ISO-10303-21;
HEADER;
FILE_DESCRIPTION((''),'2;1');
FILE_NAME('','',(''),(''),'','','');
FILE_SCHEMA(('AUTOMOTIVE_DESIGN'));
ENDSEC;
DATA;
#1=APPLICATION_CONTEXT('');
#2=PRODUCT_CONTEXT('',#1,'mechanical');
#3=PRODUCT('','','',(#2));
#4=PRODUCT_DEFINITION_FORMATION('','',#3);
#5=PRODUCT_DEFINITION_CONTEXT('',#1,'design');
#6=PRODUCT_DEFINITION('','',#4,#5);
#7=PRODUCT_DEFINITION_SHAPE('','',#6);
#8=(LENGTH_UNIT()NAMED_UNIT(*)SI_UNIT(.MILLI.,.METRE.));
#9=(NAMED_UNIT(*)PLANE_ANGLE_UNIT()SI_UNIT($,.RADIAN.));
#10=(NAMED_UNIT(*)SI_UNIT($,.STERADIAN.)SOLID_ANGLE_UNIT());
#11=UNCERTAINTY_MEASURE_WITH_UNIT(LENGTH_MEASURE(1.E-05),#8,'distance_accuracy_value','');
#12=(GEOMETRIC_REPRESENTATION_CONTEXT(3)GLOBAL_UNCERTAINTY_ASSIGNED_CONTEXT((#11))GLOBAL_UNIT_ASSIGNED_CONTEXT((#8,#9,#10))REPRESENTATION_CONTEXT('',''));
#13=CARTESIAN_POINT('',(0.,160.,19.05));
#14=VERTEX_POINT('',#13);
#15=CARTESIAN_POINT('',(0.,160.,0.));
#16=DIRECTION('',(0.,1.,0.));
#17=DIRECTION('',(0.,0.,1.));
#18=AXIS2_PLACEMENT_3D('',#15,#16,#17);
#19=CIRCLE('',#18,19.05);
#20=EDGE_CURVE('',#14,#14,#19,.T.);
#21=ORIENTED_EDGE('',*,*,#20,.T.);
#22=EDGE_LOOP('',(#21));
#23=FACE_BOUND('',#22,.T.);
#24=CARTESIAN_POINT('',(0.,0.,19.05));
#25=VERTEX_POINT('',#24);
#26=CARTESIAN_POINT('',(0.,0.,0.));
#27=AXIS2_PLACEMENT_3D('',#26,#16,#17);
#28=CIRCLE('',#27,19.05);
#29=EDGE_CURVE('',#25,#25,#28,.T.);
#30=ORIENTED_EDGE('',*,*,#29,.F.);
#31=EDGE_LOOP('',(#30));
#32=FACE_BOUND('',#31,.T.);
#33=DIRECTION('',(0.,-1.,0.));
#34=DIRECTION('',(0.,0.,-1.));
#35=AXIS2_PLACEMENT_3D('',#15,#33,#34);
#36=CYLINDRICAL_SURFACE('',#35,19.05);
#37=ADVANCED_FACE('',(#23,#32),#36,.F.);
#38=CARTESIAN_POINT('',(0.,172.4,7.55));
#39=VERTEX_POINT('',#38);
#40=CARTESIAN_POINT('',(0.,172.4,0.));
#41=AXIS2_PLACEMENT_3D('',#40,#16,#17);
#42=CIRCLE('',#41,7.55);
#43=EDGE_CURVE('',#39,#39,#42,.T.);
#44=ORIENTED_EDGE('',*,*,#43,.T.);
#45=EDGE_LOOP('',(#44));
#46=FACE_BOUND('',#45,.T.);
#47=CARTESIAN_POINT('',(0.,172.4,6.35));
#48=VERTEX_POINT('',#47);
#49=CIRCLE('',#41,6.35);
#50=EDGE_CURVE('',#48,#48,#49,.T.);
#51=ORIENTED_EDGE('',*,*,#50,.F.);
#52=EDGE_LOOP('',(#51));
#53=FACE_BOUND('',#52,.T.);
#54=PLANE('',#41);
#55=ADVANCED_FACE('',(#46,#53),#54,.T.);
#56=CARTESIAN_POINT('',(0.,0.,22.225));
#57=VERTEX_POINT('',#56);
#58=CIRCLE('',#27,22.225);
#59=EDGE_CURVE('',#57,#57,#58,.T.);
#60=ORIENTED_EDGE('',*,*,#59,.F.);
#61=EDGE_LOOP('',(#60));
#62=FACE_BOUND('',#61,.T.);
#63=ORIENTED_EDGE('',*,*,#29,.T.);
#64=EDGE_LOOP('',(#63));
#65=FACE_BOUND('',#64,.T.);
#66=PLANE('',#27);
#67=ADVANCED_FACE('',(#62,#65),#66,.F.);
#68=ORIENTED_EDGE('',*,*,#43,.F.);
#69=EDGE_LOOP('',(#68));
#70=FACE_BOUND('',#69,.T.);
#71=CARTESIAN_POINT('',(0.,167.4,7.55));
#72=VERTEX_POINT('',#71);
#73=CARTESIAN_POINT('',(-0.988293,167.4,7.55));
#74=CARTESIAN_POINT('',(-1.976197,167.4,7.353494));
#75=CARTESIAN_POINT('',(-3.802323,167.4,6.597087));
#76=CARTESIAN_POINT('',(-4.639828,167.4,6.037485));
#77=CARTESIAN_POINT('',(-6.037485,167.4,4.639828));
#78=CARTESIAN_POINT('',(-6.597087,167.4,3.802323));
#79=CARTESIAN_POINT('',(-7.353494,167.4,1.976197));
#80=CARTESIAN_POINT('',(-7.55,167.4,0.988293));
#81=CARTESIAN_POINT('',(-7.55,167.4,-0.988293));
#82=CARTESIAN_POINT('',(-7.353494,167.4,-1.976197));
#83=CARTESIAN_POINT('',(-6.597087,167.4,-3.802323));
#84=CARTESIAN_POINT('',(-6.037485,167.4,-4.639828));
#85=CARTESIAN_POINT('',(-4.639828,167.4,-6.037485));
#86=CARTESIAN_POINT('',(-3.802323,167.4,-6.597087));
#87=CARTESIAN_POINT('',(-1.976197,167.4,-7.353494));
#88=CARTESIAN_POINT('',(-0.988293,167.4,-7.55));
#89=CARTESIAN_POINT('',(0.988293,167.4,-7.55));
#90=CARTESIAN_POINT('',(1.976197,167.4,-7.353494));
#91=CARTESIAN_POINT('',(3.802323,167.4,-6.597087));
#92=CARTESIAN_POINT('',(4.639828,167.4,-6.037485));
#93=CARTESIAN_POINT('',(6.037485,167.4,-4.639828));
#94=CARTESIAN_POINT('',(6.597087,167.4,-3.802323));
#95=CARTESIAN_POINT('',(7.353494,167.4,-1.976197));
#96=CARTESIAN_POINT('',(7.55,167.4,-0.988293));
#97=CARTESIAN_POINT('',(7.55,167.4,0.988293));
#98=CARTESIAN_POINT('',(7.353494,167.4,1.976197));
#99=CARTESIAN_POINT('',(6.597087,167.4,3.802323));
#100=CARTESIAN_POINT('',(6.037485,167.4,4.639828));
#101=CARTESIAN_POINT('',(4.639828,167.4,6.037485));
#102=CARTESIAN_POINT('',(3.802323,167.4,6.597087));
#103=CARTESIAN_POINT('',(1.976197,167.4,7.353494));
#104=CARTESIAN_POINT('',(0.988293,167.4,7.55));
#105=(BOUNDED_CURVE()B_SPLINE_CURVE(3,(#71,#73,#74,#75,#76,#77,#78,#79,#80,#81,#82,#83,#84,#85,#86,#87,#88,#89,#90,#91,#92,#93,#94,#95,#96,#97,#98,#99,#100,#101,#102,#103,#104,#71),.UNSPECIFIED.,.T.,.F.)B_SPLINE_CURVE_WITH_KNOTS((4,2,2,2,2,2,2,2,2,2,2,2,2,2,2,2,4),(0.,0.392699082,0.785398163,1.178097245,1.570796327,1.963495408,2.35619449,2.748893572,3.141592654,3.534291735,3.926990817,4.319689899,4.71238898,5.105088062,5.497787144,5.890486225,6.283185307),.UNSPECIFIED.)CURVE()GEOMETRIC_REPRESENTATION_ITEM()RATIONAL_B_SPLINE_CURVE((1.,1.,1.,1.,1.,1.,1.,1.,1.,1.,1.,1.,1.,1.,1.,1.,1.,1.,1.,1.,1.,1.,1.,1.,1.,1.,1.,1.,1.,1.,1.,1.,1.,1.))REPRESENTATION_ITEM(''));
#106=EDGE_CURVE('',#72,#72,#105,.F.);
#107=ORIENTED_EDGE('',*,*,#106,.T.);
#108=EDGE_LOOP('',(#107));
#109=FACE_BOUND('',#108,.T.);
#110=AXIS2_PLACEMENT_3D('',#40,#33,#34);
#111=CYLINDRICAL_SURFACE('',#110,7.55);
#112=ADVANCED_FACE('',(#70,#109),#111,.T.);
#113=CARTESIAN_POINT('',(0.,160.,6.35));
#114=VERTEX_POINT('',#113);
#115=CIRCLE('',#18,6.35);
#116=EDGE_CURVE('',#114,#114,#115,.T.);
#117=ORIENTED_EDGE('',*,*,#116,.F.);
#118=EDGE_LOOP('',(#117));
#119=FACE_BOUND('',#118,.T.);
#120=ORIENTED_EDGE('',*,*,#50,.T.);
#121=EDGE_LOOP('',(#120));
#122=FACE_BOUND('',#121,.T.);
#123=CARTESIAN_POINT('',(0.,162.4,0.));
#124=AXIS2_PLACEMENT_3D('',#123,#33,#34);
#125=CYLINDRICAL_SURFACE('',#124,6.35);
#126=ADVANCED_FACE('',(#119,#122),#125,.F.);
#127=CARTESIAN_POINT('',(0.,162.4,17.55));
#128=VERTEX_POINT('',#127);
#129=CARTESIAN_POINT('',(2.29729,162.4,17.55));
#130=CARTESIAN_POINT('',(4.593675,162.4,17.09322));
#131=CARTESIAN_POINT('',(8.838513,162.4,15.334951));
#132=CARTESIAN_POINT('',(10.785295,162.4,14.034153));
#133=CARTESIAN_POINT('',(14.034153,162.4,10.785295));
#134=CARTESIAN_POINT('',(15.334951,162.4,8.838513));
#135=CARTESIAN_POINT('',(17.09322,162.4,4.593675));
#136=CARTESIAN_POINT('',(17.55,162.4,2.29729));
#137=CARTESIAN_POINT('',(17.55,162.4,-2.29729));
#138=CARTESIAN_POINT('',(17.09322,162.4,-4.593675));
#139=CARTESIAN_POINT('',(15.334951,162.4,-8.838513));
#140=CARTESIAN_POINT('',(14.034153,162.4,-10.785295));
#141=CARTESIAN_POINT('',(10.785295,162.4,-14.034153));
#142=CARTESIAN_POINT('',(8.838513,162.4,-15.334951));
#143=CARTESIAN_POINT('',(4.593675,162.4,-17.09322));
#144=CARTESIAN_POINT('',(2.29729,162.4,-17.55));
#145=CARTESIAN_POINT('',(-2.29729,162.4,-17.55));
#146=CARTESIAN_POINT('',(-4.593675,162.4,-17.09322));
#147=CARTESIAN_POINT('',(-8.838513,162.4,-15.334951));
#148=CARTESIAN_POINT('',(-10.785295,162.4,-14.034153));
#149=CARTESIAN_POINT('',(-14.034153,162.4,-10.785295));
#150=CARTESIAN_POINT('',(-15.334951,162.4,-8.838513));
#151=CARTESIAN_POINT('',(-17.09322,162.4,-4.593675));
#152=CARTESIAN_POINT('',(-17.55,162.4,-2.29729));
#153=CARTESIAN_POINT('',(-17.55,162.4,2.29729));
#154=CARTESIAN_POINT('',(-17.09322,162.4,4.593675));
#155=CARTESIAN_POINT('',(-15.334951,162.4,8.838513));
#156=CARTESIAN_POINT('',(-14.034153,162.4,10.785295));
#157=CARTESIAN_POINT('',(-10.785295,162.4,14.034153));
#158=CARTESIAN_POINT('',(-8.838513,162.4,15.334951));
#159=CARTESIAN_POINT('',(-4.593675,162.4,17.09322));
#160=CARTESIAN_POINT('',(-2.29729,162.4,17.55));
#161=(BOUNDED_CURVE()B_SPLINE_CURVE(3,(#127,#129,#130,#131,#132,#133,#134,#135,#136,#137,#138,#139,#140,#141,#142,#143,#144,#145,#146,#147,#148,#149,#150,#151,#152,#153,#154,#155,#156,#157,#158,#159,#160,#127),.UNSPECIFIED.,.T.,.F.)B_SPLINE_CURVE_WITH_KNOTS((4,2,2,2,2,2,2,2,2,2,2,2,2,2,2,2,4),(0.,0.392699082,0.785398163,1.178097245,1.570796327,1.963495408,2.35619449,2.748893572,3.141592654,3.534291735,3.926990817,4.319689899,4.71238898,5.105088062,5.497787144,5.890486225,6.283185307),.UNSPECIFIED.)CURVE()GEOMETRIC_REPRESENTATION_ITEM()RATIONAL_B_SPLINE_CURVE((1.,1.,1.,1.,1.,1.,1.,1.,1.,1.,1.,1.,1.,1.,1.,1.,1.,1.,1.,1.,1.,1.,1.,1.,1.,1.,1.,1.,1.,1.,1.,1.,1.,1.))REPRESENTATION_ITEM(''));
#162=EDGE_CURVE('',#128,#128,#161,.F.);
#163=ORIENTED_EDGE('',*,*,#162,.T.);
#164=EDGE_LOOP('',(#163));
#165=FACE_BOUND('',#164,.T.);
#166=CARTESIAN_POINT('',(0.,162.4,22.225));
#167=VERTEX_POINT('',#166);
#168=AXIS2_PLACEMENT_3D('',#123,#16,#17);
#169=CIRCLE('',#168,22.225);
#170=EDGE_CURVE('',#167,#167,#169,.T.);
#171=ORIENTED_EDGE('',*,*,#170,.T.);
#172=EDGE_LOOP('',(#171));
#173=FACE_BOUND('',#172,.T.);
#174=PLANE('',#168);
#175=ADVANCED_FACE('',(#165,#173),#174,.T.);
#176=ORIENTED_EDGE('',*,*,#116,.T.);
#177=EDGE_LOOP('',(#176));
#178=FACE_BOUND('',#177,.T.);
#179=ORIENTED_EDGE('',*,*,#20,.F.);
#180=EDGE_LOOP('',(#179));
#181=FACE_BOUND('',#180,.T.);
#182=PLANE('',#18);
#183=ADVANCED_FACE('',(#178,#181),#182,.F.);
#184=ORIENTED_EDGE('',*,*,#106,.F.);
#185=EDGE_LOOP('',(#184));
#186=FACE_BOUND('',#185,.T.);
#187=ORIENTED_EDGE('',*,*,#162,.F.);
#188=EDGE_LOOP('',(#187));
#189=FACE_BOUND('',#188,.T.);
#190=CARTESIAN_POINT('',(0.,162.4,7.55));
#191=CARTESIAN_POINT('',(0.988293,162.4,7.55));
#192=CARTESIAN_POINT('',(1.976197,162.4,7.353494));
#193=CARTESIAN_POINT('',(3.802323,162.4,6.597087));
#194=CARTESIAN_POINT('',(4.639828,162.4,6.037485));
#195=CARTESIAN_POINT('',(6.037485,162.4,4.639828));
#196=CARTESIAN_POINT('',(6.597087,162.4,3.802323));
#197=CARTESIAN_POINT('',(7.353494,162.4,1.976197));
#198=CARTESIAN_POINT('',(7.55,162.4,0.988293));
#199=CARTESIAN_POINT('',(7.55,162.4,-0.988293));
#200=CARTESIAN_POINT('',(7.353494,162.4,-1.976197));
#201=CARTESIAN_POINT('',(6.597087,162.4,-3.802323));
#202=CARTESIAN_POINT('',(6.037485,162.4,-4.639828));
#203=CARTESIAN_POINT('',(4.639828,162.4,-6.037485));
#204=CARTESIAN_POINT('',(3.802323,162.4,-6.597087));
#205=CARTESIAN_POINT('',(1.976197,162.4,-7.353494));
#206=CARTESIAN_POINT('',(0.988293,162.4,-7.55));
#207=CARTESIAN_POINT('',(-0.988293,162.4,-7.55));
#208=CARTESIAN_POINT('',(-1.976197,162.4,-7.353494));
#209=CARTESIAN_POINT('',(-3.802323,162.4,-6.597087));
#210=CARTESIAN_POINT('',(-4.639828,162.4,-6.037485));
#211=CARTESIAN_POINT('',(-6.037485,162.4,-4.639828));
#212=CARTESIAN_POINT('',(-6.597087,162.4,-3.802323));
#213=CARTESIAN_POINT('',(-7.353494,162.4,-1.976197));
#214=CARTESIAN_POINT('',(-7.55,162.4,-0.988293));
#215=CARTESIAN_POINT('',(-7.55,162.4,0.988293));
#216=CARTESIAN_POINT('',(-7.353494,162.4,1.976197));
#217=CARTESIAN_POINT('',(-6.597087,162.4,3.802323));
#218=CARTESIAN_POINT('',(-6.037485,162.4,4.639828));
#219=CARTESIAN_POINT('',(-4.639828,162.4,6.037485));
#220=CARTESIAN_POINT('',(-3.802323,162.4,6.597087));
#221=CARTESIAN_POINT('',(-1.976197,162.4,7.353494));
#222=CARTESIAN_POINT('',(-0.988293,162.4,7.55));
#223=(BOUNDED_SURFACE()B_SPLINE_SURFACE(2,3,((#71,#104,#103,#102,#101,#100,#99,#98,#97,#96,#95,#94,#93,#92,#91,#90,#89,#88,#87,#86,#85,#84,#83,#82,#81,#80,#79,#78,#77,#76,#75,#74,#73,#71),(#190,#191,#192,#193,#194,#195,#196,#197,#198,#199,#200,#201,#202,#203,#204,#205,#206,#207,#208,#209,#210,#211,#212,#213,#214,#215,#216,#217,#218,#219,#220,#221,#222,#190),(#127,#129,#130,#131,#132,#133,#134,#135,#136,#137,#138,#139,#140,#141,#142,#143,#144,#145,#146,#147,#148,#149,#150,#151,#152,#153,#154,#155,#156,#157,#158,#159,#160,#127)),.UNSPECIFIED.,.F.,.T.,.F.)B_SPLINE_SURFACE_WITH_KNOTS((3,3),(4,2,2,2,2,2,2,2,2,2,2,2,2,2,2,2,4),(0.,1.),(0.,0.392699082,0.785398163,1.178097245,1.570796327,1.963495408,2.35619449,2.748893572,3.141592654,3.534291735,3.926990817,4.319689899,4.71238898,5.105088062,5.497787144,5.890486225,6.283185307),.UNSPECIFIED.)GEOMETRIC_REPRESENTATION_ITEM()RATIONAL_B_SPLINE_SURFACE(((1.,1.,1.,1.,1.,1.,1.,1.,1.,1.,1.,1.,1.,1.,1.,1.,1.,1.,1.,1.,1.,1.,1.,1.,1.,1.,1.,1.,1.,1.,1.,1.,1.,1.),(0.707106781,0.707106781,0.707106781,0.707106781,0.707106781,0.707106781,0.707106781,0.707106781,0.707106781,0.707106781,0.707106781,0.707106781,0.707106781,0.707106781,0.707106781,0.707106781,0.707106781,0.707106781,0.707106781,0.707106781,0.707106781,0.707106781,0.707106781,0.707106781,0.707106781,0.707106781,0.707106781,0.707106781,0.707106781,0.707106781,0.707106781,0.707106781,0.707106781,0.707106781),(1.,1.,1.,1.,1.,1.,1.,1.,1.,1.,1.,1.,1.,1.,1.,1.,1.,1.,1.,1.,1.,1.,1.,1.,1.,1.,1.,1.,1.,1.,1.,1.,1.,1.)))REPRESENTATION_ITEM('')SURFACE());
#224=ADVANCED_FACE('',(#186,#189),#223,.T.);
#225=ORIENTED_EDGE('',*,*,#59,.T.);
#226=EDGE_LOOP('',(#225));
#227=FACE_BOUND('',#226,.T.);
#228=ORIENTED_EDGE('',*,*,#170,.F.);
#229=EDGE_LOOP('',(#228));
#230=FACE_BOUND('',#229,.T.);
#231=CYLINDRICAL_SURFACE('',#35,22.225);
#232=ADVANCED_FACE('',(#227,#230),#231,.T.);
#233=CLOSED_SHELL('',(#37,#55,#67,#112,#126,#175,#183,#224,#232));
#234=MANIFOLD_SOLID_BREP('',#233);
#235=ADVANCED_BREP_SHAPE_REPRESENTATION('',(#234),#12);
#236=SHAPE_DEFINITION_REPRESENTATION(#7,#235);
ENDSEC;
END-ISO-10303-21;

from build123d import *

# Parameters (mm, degrees)
SKETCH1_R           = 22.225
SKETCH1_R_2         = 19.05
BOSS_EXTRUDE1_DEPTH = 160
BOSS_EXTRUDE2_START = -160
SKETCH3_R           = 22.225
SKETCH3_R_2         = 6.35
BOSS_EXTRUDE2_DEPTH = 2.4
SKETCH4_R           = 7.55
SKETCH4_R_2         = 6.35
BOSS_EXTRUDE3_DEPTH = 10
FILLET1_SIZE        = 10
FILLET1_SIZE_2      = 5


with BuildPart() as part:
    # Sketch1 → Boss-Extrude1 (new body)
    with BuildSketch(Plane(origin=(0, 0, 0), x_dir=(1, 0, 0), z_dir=(0, 1, 0))):
        with Locations(Location((0, 0, 0), (0, 0, 270))):
            Circle(SKETCH1_R)
        with Locations(Location((0, 0, 0), (0, 0, 270))):
            Circle(SKETCH1_R_2, mode=Mode.SUBTRACT)
    extrude(amount=BOSS_EXTRUDE1_DEPTH)

    # Sketch3 → Boss-Extrude2 (add)
    with BuildSketch(Plane.XZ.offset(BOSS_EXTRUDE2_START)):
        with Locations(Location((0, 0, 0), (0, 0, 90))):
            Circle(SKETCH3_R)
        with Locations(Location((0, 0, 0), (0, 0, 90))):
            Circle(SKETCH3_R_2, mode=Mode.SUBTRACT)
    extrude(amount=-BOSS_EXTRUDE2_DEPTH)

    # Sketch4 → Boss-Extrude3 (add)
    with BuildSketch(Plane(origin=(0, 162.4, 0), x_dir=(-1, 0, 0), z_dir=(0, 1, 0))):
        with Locations(Location((0, 0, 0), (0, 0, 90))):
            Circle(SKETCH4_R)
        with Locations(Location((0, 0, 0), (0, 0, 90))):
            Circle(SKETCH4_R_2, mode=Mode.SUBTRACT)
    extrude(amount=BOSS_EXTRUDE3_DEPTH)

    # Fillet1
    # an asymmetric fillet: 10, 5 mm, written as the material it adds along each edge
    with BuildSketch(Plane(origin=(0, 162.4, 0), x_dir=(0, 0, 1), z_dir=(-1, 0, 0))) as fillet1_piece_1:
        with BuildLine():
            Bezier((7.55 + FILLET1_SIZE, 0), (7.55, 0), (7.55, FILLET1_SIZE_2), weights=[1, 0.707106781, 1])
            Line((7.55, FILLET1_SIZE_2), (7.55, 0))
            Line((7.55, 0), (7.55 + FILLET1_SIZE, 0))
        make_face()
    revolve(axis=Axis((0, 162.4, 0), (0, 1, 0)))


solid = part.part
